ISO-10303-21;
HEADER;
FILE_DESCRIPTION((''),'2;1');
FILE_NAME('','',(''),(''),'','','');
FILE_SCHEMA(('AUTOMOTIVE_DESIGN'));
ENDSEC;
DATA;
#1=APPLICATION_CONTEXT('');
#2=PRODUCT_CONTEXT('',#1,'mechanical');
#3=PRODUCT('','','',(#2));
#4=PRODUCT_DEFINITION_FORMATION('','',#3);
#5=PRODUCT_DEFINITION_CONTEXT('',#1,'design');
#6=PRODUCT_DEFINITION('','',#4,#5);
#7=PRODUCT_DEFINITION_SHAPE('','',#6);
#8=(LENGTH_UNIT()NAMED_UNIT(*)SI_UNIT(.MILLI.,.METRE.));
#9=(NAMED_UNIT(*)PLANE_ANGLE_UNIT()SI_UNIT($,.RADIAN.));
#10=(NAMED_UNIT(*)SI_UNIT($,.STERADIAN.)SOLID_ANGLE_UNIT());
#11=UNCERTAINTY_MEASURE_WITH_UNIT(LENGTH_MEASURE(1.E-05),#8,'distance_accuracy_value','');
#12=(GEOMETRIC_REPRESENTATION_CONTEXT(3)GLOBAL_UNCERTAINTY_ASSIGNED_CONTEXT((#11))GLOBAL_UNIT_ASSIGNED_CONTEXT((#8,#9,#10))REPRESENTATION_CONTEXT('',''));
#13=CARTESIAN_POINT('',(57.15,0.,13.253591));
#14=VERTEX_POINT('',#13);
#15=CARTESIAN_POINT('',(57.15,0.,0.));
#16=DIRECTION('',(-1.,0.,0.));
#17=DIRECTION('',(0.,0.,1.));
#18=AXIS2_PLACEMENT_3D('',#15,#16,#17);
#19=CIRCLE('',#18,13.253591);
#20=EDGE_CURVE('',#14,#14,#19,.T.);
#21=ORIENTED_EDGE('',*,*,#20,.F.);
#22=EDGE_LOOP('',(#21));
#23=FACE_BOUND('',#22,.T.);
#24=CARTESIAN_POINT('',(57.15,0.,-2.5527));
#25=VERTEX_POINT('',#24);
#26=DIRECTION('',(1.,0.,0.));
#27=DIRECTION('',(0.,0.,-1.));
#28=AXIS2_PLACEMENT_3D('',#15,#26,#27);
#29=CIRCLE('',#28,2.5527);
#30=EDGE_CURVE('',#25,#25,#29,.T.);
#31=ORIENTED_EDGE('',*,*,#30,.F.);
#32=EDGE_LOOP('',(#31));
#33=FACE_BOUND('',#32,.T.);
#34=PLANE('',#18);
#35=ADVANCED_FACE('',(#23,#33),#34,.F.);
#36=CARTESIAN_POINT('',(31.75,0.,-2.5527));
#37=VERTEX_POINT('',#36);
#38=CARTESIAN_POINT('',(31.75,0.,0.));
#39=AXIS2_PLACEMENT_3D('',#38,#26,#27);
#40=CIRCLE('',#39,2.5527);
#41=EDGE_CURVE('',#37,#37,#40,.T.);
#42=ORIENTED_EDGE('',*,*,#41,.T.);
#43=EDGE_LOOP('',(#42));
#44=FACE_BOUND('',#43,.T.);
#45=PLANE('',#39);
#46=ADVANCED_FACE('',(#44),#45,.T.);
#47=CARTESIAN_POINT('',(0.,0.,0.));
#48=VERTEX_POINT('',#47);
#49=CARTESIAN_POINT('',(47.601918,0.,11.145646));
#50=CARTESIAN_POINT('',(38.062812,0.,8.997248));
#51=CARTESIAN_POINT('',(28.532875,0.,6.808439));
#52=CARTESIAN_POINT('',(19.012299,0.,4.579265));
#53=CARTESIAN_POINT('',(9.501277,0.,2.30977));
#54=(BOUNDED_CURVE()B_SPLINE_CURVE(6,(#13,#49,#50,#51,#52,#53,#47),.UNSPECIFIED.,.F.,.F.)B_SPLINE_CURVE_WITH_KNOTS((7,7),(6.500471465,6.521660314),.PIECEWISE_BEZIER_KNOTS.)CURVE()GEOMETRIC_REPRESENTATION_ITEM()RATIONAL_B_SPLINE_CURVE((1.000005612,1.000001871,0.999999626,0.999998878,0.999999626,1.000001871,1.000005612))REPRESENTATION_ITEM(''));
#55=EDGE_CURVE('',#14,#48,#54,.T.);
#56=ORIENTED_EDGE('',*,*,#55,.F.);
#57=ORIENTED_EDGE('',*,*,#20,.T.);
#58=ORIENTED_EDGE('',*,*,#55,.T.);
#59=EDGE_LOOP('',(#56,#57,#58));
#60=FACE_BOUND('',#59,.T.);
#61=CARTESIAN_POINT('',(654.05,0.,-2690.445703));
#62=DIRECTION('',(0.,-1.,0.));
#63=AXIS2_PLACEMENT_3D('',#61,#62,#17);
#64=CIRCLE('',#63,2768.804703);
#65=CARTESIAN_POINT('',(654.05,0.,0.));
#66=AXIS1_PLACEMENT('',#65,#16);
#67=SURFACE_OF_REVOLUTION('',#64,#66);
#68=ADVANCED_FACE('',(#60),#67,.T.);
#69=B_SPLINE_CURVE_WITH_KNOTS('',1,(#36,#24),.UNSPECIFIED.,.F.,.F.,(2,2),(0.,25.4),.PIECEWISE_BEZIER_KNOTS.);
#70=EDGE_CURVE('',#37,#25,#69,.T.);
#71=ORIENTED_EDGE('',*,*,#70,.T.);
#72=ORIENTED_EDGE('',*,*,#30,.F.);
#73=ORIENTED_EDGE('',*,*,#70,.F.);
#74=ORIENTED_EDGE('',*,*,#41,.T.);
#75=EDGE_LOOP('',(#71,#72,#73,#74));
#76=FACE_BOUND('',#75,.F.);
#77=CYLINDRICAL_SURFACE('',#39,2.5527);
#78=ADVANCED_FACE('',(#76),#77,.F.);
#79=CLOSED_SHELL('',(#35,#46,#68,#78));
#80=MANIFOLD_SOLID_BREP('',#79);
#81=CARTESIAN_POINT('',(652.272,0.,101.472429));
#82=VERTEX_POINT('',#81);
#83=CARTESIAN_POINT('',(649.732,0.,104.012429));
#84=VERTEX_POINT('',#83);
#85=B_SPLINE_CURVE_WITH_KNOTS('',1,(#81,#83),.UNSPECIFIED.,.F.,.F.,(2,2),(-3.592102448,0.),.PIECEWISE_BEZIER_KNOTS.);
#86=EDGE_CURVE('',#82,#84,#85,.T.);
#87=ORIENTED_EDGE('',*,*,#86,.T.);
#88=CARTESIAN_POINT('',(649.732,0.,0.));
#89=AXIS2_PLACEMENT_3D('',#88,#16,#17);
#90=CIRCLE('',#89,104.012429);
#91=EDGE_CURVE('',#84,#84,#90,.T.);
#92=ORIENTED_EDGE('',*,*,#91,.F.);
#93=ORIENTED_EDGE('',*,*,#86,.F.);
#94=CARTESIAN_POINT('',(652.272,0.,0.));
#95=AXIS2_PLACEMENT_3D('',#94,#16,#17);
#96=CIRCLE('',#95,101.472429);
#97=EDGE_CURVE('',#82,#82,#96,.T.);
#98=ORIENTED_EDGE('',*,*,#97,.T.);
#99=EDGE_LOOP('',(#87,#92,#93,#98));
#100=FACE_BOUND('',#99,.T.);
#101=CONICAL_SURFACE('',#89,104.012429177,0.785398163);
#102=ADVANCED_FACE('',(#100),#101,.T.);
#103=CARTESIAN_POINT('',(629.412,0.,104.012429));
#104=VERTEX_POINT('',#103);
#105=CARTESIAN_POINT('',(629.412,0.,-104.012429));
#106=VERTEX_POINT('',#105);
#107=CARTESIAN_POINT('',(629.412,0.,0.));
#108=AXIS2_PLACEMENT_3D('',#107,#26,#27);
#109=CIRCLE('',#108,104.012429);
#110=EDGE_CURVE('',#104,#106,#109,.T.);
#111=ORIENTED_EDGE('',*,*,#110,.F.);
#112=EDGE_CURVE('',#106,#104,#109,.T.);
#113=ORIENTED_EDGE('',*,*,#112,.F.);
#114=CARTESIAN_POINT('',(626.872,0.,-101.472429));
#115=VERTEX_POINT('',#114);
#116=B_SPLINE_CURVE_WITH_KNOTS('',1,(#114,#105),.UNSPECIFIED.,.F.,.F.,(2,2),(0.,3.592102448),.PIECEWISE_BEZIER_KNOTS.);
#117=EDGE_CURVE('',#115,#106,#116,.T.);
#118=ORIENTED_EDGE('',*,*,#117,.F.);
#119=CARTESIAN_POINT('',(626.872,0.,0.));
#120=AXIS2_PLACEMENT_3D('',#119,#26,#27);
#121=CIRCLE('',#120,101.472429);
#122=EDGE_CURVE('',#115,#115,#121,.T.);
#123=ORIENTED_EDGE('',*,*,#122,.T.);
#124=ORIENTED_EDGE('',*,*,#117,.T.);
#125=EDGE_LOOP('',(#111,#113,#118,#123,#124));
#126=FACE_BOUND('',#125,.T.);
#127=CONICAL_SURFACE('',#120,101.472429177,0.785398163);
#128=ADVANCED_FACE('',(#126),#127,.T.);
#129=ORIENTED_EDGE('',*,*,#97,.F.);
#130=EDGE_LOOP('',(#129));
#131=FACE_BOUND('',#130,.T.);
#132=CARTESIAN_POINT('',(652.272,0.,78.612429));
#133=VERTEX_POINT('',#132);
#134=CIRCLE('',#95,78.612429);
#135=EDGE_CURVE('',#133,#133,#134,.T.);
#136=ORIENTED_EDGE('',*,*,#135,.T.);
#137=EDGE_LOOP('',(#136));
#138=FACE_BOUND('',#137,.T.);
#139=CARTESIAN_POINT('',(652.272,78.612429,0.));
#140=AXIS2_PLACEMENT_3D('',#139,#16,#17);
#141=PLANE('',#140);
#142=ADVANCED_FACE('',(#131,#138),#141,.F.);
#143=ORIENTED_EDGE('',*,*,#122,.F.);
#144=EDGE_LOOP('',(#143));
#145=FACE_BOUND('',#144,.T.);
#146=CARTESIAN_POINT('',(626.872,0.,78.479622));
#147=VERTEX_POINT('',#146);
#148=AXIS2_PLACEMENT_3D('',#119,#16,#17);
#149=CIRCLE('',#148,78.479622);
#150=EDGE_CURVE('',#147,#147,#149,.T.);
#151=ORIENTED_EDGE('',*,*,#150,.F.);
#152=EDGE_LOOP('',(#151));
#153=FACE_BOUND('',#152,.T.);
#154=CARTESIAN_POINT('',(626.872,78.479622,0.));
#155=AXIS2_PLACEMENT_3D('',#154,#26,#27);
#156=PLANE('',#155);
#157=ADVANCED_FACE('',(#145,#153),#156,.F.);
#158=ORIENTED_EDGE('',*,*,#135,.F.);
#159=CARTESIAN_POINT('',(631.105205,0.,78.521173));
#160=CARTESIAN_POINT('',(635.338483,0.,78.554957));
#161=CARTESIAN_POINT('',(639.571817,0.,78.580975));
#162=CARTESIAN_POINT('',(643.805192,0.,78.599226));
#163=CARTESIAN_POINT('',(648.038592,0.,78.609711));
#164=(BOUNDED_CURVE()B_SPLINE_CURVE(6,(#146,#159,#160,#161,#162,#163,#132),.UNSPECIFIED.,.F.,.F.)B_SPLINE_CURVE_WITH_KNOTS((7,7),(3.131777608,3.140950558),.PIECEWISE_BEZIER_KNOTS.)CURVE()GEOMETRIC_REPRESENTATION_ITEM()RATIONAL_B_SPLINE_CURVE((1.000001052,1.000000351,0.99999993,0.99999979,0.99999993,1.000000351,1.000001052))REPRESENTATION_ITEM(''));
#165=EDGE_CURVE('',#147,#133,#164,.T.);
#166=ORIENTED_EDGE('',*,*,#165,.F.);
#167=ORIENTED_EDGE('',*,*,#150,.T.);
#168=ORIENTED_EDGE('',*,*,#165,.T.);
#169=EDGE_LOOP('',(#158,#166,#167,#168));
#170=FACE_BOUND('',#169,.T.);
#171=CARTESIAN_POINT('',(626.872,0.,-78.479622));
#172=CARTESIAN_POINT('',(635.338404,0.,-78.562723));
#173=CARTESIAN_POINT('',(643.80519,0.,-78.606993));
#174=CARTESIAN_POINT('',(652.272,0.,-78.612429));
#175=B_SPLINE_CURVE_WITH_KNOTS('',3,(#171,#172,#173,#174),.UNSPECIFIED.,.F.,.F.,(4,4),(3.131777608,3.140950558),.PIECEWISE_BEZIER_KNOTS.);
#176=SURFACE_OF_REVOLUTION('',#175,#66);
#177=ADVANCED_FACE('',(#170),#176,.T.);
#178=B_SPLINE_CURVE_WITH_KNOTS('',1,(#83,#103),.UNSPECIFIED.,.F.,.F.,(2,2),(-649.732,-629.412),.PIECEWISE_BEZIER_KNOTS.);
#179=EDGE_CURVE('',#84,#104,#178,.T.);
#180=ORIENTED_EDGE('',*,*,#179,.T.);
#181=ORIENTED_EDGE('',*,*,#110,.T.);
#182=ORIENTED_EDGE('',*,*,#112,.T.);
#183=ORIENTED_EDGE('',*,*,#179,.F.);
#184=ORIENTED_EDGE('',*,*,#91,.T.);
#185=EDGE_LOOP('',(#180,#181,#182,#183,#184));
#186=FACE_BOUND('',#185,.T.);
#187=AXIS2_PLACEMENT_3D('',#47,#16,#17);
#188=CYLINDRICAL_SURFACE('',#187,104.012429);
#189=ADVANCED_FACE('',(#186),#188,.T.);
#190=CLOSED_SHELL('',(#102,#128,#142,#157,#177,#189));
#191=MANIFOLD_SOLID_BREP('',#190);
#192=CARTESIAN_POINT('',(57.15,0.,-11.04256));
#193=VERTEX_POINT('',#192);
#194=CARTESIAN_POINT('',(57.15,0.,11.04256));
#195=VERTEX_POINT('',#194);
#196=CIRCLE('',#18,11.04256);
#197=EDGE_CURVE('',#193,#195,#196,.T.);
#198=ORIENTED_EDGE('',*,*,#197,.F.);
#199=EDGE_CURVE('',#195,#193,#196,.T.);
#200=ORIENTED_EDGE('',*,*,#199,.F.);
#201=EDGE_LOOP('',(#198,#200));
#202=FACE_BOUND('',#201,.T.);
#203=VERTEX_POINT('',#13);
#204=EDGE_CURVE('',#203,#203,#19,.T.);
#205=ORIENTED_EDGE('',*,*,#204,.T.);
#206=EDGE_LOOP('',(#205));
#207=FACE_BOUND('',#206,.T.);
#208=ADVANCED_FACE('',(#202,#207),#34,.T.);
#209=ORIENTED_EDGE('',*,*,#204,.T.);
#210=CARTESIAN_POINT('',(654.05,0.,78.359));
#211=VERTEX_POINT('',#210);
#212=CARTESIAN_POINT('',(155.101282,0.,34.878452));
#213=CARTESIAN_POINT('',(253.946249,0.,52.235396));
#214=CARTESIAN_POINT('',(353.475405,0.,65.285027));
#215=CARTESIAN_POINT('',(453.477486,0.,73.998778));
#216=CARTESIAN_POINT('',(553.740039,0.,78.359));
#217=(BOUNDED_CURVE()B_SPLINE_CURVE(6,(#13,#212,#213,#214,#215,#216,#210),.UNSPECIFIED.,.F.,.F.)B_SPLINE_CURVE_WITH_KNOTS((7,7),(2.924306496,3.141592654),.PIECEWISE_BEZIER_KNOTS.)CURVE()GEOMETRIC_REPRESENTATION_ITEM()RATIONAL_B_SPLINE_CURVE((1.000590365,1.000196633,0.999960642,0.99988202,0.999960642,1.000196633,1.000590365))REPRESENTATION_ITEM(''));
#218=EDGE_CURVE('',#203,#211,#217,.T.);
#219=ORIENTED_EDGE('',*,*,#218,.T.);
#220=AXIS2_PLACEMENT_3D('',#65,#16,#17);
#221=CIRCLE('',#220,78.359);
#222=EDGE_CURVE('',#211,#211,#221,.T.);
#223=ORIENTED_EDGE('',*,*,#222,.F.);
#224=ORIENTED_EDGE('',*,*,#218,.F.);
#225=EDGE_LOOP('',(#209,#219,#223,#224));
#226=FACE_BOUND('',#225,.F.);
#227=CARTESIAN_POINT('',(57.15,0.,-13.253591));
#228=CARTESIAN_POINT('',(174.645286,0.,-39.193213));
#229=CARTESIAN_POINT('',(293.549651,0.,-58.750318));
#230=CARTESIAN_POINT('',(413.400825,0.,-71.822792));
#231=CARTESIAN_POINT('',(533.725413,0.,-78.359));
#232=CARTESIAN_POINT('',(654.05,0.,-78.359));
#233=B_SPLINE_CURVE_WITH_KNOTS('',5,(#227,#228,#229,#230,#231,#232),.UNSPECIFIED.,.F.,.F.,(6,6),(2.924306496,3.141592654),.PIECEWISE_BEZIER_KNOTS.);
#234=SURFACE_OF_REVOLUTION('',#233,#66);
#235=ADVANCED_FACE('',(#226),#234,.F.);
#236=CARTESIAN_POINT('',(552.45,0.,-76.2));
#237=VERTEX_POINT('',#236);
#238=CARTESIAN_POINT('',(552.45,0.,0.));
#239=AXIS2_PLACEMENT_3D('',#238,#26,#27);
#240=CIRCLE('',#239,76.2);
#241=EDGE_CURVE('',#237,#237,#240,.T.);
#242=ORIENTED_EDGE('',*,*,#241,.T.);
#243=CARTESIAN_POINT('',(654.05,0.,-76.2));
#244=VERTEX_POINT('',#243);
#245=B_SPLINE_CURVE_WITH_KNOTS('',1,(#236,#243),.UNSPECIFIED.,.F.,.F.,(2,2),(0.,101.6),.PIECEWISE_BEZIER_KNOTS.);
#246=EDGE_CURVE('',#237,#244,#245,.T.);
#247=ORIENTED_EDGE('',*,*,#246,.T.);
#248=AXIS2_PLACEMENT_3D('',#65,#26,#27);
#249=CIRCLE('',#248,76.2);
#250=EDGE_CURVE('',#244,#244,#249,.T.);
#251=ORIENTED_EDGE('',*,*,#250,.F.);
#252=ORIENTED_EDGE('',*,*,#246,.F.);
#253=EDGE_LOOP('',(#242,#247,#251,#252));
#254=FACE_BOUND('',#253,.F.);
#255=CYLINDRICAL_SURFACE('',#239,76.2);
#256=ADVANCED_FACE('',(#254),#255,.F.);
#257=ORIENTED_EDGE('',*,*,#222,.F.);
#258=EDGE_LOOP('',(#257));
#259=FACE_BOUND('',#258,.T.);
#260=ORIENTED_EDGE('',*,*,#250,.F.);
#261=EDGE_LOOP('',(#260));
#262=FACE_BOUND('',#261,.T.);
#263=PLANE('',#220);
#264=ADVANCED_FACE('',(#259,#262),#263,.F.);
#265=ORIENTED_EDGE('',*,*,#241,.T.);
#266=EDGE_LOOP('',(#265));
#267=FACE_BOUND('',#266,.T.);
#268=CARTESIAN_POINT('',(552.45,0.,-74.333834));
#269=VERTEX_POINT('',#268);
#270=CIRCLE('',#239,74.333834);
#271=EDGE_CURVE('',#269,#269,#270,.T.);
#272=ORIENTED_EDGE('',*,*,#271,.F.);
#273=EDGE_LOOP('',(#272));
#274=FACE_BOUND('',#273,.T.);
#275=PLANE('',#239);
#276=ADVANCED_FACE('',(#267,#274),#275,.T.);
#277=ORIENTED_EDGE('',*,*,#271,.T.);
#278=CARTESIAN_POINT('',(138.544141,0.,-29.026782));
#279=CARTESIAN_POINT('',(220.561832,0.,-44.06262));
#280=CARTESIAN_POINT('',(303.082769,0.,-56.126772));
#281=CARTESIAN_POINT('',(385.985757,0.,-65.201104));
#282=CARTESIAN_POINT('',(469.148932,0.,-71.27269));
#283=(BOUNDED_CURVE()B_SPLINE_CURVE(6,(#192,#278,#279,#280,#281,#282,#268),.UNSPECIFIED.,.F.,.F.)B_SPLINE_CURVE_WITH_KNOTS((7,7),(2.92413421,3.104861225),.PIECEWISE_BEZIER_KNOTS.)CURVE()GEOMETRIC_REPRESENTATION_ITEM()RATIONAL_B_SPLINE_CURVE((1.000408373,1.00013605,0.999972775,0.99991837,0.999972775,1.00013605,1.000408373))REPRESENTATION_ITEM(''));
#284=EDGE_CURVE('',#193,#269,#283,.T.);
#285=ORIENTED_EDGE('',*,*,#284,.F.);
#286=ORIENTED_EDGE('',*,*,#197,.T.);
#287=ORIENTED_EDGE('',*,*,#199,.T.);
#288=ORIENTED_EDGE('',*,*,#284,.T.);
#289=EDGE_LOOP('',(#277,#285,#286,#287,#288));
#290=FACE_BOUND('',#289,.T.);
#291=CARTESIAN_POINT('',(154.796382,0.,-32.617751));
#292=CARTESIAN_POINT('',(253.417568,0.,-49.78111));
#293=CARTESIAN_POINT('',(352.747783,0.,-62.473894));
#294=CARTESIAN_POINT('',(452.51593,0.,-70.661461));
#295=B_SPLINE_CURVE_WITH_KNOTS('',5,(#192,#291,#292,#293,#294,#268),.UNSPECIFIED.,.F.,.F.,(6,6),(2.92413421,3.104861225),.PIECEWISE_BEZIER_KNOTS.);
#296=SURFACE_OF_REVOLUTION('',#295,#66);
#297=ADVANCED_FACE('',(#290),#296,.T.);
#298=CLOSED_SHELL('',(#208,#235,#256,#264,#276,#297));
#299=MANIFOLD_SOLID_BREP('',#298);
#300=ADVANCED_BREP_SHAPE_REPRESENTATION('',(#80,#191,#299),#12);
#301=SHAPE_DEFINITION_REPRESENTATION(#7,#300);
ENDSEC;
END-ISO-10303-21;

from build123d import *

# Parameters (mm, degrees)
OGIVE_SHELL_T      = -2.159
SKETCH1_R          = 2.5527
CUT_EXTRUDE1_DEPTH = 25.4
SKETCH2_R          = 76.2
CUT_EXTRUDE4_DEPTH = 101.6
CHAMFER1_SIZE      = 2.54


# Read off the part's stored shape, not the designer's step: Ogive Nose Cone Revolve
with BuildPart() as part:
    # Ogive Sketch → Ogive Body Revolve (revolve)
    with BuildSketch(Plane.XY, mode=Mode.PRIVATE) as ogive_body_revolve_sk:
        with BuildLine():
            Line((57.15, 0), (654.05, 0))
            Line((654.05, 0), (654.05, 78.359))
            ThreePointArc((654.05, 78.359), (353.829945599, 62.034524409), (57.15, 13.253591171))
            Line((57.15, 13.253591171), (57.15, 0))
        make_face()
    revolve(ogive_body_revolve_sk.sketch.rotate(Axis((0, 0, 0), (1, 0, 0)), 90), axis=Axis((0, 0, 0), (1, 0, 0)))

    # Ogive Shell
    ogive_shell_openings = [part.faces().sort_by_distance(p)[0] for p in [
        (57.15, 0, 0),
        (654.05, 0, 0),
    ]]
    offset(amount=OGIVE_SHELL_T, openings=ogive_shell_openings, kind=Kind.INTERSECTION)

    # Sketch2 → Cut-Extrude4 (cut)
    with BuildSketch(Plane(origin=(654.05, 0, 0), x_dir=(0, 0, -1), z_dir=(1, 0, 0))):
        Circle(SKETCH2_R)
    extrude(amount=-CUT_EXTRUDE4_DEPTH, mode=Mode.SUBTRACT)


with BuildPart() as body_2:
    # Ogive Nose Cone Revolve outline → Ogive Nose Cone Revolve (revolve)
    with BuildSketch(Plane.YX):
        with BuildLine():
            add(Edge.make_bspline(
                [(13.253591171, 57.15), (6.929542592, 28.504790288), (0, 0)],
                knots=[0.217286158, 0.217286158, 0.217286158, 0.238475007, 0.238475007, 0.238475007], degree=2, weights=[1, 0.99994388, 1]))
            Line((13.253591171, 57.15), (0, 57.15))
            Line((0, 57.15), (0, 0))
        make_face()
    revolve(axis=Axis((0, 0, 0), (1, 0, 0)))

    # Sketch1 → Cut-Extrude1 (cut)
    with BuildSketch(Plane(origin=(57.15, 0, 0), x_dir=(0, 0, -1), z_dir=(1, 0, 0))):
        Circle(SKETCH1_R)
    extrude(amount=-CUT_EXTRUDE1_DEPTH, mode=Mode.SUBTRACT)


with BuildPart() as body_3:
    # Sketch3 → Revolve1 (revolve)
    with BuildSketch(Plane.XY, mode=Mode.PRIVATE) as revolve1_sk:
        with BuildLine():
            Line((652.272, 78.612429177), (652.272, 104.012429177))
            Line((652.272, 104.012429177), (626.872, 104.012429177))
            Line((626.872, 104.012429177), (626.872, 78.47962228))
            ThreePointArc((626.872, 78.47962228), (639.571847721, 78.575149895), (652.272, 78.612429177))
        make_face()
    revolve(revolve1_sk.sketch.rotate(Axis((0, 0, 0), (1, 0, 0)), 90), axis=Axis((0, 0, 0), (1, 0, 0)))

    # Chamfer1
    chamfer1_edges = [body_3.edges().sort_by_distance(p)[0] for p in [
        (626.872, 0, -104.012429177),
        (652.272, 0, -104.012429177),
    ]]
    chamfer(chamfer1_edges, length=CHAMFER1_SIZE)


solid = Compound([part.part, body_2.part, body_3.part])
